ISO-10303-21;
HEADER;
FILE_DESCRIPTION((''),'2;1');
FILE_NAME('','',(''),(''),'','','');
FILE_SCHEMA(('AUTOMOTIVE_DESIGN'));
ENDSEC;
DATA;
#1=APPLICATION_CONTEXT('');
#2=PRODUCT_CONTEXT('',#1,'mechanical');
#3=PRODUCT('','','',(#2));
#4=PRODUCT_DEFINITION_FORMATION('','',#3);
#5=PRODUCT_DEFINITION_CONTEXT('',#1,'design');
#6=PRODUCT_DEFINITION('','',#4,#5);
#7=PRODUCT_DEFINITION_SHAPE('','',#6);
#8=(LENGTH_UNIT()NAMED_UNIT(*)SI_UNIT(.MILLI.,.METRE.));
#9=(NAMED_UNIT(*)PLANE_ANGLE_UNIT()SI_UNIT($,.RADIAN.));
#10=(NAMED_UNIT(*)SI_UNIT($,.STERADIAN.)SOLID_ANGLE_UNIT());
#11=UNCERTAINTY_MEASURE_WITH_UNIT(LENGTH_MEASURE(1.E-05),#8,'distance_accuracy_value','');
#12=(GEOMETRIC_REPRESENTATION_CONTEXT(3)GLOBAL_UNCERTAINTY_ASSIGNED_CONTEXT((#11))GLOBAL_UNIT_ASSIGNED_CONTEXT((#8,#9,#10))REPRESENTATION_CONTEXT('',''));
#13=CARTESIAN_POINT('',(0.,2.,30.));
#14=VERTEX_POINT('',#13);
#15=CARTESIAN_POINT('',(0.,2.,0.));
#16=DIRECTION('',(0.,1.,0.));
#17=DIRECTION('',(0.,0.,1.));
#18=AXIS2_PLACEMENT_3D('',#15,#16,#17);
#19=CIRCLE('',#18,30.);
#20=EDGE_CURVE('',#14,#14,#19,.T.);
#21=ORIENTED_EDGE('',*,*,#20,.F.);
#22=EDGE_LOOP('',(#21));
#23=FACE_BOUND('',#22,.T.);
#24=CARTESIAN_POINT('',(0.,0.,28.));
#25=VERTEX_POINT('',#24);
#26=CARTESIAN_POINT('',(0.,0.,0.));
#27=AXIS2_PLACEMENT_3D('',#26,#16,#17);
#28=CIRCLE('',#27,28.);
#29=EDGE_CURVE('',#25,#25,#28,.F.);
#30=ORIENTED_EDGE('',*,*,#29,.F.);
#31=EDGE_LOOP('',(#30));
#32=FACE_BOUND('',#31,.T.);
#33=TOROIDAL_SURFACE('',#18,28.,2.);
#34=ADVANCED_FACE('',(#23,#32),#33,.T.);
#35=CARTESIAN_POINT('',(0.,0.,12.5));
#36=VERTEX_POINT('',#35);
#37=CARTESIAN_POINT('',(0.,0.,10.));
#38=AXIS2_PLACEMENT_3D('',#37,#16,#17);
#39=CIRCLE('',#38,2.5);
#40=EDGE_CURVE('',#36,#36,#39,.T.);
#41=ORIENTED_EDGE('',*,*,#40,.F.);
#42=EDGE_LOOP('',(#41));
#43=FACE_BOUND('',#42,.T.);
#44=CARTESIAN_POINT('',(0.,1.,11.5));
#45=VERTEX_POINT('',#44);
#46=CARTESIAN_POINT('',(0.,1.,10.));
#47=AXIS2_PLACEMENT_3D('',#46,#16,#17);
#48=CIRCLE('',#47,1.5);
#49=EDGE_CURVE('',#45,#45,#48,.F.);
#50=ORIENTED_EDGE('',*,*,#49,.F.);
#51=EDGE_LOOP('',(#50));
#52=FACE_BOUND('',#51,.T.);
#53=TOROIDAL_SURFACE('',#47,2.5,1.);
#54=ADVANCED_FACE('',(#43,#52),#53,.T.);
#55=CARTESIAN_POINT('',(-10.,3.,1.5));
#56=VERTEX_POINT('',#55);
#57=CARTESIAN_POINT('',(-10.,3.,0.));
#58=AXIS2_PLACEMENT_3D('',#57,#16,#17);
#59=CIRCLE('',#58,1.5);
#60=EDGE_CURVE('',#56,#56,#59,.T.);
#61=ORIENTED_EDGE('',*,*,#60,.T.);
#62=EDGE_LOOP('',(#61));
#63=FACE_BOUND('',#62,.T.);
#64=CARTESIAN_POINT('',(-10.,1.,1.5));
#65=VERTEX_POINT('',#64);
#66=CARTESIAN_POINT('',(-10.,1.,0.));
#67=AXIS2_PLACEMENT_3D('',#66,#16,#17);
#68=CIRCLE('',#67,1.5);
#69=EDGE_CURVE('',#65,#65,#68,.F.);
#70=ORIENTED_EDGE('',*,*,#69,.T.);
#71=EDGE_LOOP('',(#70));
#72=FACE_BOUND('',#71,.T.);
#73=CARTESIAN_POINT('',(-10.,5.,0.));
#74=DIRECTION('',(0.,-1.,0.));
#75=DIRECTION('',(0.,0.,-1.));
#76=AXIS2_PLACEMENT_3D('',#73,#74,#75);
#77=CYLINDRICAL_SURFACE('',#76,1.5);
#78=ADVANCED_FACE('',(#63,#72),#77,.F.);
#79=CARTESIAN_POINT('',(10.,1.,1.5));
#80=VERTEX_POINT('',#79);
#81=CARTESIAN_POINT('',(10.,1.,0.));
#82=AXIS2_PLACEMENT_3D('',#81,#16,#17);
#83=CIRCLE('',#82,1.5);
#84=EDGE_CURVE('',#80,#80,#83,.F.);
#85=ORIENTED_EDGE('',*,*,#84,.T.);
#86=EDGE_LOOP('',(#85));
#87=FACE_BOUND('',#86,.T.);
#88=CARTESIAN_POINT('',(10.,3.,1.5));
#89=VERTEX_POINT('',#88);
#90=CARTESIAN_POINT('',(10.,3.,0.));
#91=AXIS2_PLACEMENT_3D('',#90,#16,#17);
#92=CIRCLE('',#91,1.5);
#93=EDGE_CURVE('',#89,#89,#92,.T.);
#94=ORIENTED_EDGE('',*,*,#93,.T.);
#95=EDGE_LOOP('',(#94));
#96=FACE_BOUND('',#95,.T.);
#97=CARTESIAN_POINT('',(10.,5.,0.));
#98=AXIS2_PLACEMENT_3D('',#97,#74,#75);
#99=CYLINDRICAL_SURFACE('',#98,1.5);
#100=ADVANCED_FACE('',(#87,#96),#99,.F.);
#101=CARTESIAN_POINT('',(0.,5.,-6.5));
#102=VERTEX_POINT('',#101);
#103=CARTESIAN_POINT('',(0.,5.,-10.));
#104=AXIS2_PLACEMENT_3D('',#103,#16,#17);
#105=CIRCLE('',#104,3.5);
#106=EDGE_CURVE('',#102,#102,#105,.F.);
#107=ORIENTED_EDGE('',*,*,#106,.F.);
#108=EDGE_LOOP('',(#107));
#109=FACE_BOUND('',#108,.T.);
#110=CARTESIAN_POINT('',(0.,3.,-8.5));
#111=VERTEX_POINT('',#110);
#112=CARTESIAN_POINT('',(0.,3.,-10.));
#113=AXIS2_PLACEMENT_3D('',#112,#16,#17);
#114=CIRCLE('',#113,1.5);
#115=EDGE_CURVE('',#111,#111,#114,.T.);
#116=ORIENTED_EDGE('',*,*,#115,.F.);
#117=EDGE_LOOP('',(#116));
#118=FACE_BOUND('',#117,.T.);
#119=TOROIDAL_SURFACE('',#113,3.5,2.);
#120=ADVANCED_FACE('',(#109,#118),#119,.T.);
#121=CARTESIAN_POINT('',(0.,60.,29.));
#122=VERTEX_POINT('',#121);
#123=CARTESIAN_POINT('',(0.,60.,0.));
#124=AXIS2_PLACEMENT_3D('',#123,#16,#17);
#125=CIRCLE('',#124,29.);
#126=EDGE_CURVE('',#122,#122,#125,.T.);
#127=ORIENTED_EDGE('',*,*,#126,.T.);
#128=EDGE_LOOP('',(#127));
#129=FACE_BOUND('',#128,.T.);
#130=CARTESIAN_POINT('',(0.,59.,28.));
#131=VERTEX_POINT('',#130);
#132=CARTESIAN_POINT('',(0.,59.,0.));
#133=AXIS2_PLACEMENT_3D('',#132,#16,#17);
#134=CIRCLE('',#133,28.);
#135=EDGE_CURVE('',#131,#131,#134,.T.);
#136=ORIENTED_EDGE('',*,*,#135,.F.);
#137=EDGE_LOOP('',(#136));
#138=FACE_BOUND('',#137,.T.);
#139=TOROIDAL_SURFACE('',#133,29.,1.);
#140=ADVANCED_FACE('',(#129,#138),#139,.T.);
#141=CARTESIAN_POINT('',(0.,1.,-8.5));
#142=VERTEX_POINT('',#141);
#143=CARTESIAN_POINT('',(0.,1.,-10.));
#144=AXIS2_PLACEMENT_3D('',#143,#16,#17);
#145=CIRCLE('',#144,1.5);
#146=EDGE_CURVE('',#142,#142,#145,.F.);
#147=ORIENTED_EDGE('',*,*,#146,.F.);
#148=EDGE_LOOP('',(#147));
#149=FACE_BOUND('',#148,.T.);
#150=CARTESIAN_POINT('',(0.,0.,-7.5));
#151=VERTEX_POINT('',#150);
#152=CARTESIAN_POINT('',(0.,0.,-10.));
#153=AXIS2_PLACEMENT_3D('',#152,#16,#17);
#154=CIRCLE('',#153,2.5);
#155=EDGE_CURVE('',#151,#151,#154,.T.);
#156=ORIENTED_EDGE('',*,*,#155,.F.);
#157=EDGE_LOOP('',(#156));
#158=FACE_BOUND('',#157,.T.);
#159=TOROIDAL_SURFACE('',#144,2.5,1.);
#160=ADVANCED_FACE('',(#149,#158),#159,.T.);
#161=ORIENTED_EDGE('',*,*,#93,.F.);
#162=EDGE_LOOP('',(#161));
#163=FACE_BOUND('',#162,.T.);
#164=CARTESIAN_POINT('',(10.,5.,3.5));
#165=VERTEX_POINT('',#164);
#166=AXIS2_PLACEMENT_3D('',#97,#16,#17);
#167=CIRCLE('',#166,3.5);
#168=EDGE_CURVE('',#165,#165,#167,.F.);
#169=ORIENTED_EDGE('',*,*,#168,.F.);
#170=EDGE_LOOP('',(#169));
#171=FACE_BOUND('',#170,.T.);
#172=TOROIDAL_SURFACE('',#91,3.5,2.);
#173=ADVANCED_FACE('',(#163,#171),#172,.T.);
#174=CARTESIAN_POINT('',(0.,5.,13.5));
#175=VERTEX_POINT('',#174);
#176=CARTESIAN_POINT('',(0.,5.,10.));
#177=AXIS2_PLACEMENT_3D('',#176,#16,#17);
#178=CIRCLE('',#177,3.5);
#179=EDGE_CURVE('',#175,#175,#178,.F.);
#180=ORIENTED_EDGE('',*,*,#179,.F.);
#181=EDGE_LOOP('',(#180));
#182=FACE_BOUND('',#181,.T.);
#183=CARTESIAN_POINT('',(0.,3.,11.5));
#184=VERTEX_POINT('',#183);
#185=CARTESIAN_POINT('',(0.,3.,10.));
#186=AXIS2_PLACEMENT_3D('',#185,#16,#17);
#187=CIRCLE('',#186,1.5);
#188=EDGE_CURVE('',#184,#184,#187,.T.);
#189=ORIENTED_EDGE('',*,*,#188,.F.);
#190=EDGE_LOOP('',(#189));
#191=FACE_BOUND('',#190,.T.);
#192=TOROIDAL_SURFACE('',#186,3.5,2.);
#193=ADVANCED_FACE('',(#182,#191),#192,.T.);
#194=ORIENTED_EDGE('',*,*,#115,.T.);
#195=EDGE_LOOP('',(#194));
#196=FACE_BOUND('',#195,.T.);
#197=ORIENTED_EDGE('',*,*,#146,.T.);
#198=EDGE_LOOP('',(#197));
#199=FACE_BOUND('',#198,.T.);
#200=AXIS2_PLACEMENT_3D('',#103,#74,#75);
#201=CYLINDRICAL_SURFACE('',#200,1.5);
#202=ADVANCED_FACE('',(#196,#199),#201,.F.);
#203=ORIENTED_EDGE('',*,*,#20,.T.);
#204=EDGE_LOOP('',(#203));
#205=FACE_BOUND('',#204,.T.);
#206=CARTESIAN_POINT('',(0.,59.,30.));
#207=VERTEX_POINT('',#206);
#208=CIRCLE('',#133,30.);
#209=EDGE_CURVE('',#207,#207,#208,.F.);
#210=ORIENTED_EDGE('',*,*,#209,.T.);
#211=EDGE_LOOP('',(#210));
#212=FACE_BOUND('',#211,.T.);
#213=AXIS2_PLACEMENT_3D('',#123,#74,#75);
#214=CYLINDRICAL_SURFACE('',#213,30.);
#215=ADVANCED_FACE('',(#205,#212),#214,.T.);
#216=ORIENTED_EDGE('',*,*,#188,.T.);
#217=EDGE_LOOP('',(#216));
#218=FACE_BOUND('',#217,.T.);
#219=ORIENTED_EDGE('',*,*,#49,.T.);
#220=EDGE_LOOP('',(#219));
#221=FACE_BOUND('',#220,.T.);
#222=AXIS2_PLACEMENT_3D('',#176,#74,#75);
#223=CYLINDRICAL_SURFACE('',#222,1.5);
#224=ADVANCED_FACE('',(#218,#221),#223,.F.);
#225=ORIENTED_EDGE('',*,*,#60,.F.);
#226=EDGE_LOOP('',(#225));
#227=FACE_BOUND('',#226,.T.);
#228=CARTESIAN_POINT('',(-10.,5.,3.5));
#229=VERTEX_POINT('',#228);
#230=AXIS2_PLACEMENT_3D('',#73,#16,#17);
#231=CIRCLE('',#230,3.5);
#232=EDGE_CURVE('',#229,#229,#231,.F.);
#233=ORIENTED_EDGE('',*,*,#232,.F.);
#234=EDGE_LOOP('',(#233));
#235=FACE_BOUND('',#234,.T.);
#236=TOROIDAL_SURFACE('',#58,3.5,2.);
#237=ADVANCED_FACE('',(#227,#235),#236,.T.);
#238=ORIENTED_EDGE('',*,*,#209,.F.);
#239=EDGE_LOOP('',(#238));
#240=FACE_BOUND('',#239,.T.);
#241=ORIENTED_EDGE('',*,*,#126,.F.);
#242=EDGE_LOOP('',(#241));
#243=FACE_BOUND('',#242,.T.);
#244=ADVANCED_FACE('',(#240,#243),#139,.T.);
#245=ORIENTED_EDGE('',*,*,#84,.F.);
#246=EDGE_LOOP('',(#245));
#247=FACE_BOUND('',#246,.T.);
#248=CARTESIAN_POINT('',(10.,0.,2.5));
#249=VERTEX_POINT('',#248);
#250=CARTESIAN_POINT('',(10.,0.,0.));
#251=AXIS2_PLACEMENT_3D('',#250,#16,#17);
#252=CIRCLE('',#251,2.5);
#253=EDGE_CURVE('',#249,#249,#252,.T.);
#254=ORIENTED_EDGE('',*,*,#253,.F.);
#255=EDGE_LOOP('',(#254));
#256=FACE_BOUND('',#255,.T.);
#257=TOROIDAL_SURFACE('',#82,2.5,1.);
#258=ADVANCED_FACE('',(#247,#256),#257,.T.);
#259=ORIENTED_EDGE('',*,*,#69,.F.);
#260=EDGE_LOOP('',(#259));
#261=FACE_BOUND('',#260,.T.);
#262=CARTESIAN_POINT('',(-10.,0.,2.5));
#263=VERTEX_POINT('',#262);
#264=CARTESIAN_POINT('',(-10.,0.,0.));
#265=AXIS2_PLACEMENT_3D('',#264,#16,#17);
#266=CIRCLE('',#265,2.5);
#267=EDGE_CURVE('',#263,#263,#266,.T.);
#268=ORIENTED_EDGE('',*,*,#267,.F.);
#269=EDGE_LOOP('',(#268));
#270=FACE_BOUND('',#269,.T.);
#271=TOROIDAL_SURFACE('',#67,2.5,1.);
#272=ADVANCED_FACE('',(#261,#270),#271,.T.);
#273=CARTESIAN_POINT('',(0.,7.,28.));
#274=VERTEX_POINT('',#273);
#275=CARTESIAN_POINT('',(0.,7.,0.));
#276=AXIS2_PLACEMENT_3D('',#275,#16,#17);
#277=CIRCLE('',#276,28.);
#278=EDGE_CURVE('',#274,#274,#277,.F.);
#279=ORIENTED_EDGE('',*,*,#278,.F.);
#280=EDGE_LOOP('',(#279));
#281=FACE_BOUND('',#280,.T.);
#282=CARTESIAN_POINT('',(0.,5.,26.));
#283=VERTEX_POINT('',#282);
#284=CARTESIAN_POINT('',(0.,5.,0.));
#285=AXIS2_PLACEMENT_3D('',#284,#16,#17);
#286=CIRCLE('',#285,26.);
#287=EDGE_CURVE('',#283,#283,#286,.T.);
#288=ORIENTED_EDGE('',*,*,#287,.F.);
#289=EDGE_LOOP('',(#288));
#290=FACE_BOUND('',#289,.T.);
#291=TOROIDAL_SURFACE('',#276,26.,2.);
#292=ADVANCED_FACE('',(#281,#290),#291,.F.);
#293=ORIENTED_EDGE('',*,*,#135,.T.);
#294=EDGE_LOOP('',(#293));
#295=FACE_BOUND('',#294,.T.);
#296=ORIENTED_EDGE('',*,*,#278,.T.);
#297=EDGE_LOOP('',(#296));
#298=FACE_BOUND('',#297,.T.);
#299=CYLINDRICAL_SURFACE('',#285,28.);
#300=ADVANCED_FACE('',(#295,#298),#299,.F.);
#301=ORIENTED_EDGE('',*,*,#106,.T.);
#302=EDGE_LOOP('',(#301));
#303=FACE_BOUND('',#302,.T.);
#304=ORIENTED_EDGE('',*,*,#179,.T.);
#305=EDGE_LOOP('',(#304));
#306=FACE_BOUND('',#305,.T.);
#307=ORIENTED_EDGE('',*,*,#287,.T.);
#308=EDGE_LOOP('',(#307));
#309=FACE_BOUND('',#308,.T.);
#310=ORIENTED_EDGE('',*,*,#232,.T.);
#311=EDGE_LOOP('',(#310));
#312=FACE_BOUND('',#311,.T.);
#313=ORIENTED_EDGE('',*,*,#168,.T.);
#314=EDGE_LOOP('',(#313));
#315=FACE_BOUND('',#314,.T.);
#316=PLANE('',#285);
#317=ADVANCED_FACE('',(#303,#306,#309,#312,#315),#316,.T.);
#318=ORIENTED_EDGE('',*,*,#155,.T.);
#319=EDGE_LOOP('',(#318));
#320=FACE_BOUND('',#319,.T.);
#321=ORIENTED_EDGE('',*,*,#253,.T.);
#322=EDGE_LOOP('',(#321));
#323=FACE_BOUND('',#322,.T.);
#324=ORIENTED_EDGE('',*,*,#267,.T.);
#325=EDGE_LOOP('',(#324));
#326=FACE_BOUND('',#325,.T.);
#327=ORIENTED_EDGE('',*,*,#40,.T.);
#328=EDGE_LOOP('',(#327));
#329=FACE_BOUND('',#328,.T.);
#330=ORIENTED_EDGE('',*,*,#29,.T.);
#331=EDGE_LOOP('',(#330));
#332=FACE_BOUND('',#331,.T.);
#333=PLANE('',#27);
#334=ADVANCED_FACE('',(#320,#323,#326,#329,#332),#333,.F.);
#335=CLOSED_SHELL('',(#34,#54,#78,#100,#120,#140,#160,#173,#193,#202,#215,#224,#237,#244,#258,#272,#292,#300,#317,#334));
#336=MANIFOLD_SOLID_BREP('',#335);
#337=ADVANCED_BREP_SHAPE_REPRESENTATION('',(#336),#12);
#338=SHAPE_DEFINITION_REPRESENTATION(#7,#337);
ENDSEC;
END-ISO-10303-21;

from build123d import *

# Parameters (mm, degrees)
SKETCH_1_R          = 30
EXTRUDE_1_DEPTH     = 60
SKETCH_2_R          = 28
CUT_EXTRUDE_1_DEPTH = 55
SKETCH_3_R          = 1.5
CUT_EXTRUDE_2_DEPTH = 5
FILLET_1_R          = 2
FILLET_2_R          = 2
FILLET_3_R          = 2
FILLET_4_R          = 1
FILLET_5_R          = 1
FILLET_6_R          = 1


with BuildPart() as part:
    # Эскиз1 → Бобышка-Вытянуть1 (new body)
    with BuildSketch(Plane(origin=(0, 0, 0), x_dir=(1, 0, 0), z_dir=(0, 1, 0))):
        with Locations(Location((0, 0, 0), (0, 0, 270))):
            Circle(SKETCH_1_R)
    extrude(amount=EXTRUDE_1_DEPTH)

    # Эскиз2 → Вырез-Вытянуть1 (cut)
    with BuildSketch(Plane(origin=(0, 60, 0), x_dir=(1, 0, 0), z_dir=(0, 1, 0))):
        with Locations(Location((0, 0, 0), (0, 0, 270))):
            Circle(SKETCH_2_R)
    extrude(amount=-CUT_EXTRUDE_1_DEPTH, mode=Mode.SUBTRACT)

    # Эскиз3 → Вырез-Вытянуть2 (cut)
    with BuildSketch(Plane.XZ):
        with Locations(Location((0, 10, 0), (0, 0, 270))):
            Circle(SKETCH_3_R)
        with Locations(Location((0, -10, 0), (0, 0, 270))):
            Circle(SKETCH_3_R)
        with Locations(Location((10, 0, 0), (0, 0, 270))):
            Circle(SKETCH_3_R)
        with Locations(Location((-10, 0, 0), (0, 0, 270))):
            Circle(SKETCH_3_R)
    extrude(amount=-CUT_EXTRUDE_2_DEPTH, mode=Mode.SUBTRACT)

    # Скругление1
    fillet_1_edges = [part.edges().sort_by_distance(p)[0] for p in [
        (0, 0, -30),
    ]]
    fillet(fillet_1_edges, radius=FILLET_1_R)

    # Скругление2
    fillet_2_edges = [part.edges().sort_by_distance(p)[0] for p in [
        (0, 5, -28),
    ]]
    fillet(fillet_2_edges, radius=FILLET_2_R)

    # Скругление3
    fillet_3_edges = [part.edges().sort_by_distance(p)[0] for p in [
        (0, 5, 11.5),
        (0, 5, -8.5),
        (10, 5, 1.5),
        (-10, 5, 1.5),
    ]]
    fillet(fillet_3_edges, radius=FILLET_3_R)

    # Скругление4
    fillet_4_edges = [part.edges().sort_by_distance(p)[0] for p in [
        (0, 0, 11.5),
        (0, 0, -8.5),
        (10, 0, 1.5),
        (-10, 0, 1.5),
    ]]
    fillet(fillet_4_edges, radius=FILLET_4_R)

    # Скругление5
    fillet_5_edges = [part.edges().sort_by_distance(p)[0] for p in [
        (0, 60, -30),
    ]]
    fillet(fillet_5_edges, radius=FILLET_5_R)

    # Скругление6
    fillet_6_edges = [part.edges().sort_by_distance(p)[0] for p in [
        (0, 60, -28),
    ]]
    fillet(fillet_6_edges, radius=FILLET_6_R - 0.0001)  # a hair under: the kernel refuses the full size


solid = part.part
